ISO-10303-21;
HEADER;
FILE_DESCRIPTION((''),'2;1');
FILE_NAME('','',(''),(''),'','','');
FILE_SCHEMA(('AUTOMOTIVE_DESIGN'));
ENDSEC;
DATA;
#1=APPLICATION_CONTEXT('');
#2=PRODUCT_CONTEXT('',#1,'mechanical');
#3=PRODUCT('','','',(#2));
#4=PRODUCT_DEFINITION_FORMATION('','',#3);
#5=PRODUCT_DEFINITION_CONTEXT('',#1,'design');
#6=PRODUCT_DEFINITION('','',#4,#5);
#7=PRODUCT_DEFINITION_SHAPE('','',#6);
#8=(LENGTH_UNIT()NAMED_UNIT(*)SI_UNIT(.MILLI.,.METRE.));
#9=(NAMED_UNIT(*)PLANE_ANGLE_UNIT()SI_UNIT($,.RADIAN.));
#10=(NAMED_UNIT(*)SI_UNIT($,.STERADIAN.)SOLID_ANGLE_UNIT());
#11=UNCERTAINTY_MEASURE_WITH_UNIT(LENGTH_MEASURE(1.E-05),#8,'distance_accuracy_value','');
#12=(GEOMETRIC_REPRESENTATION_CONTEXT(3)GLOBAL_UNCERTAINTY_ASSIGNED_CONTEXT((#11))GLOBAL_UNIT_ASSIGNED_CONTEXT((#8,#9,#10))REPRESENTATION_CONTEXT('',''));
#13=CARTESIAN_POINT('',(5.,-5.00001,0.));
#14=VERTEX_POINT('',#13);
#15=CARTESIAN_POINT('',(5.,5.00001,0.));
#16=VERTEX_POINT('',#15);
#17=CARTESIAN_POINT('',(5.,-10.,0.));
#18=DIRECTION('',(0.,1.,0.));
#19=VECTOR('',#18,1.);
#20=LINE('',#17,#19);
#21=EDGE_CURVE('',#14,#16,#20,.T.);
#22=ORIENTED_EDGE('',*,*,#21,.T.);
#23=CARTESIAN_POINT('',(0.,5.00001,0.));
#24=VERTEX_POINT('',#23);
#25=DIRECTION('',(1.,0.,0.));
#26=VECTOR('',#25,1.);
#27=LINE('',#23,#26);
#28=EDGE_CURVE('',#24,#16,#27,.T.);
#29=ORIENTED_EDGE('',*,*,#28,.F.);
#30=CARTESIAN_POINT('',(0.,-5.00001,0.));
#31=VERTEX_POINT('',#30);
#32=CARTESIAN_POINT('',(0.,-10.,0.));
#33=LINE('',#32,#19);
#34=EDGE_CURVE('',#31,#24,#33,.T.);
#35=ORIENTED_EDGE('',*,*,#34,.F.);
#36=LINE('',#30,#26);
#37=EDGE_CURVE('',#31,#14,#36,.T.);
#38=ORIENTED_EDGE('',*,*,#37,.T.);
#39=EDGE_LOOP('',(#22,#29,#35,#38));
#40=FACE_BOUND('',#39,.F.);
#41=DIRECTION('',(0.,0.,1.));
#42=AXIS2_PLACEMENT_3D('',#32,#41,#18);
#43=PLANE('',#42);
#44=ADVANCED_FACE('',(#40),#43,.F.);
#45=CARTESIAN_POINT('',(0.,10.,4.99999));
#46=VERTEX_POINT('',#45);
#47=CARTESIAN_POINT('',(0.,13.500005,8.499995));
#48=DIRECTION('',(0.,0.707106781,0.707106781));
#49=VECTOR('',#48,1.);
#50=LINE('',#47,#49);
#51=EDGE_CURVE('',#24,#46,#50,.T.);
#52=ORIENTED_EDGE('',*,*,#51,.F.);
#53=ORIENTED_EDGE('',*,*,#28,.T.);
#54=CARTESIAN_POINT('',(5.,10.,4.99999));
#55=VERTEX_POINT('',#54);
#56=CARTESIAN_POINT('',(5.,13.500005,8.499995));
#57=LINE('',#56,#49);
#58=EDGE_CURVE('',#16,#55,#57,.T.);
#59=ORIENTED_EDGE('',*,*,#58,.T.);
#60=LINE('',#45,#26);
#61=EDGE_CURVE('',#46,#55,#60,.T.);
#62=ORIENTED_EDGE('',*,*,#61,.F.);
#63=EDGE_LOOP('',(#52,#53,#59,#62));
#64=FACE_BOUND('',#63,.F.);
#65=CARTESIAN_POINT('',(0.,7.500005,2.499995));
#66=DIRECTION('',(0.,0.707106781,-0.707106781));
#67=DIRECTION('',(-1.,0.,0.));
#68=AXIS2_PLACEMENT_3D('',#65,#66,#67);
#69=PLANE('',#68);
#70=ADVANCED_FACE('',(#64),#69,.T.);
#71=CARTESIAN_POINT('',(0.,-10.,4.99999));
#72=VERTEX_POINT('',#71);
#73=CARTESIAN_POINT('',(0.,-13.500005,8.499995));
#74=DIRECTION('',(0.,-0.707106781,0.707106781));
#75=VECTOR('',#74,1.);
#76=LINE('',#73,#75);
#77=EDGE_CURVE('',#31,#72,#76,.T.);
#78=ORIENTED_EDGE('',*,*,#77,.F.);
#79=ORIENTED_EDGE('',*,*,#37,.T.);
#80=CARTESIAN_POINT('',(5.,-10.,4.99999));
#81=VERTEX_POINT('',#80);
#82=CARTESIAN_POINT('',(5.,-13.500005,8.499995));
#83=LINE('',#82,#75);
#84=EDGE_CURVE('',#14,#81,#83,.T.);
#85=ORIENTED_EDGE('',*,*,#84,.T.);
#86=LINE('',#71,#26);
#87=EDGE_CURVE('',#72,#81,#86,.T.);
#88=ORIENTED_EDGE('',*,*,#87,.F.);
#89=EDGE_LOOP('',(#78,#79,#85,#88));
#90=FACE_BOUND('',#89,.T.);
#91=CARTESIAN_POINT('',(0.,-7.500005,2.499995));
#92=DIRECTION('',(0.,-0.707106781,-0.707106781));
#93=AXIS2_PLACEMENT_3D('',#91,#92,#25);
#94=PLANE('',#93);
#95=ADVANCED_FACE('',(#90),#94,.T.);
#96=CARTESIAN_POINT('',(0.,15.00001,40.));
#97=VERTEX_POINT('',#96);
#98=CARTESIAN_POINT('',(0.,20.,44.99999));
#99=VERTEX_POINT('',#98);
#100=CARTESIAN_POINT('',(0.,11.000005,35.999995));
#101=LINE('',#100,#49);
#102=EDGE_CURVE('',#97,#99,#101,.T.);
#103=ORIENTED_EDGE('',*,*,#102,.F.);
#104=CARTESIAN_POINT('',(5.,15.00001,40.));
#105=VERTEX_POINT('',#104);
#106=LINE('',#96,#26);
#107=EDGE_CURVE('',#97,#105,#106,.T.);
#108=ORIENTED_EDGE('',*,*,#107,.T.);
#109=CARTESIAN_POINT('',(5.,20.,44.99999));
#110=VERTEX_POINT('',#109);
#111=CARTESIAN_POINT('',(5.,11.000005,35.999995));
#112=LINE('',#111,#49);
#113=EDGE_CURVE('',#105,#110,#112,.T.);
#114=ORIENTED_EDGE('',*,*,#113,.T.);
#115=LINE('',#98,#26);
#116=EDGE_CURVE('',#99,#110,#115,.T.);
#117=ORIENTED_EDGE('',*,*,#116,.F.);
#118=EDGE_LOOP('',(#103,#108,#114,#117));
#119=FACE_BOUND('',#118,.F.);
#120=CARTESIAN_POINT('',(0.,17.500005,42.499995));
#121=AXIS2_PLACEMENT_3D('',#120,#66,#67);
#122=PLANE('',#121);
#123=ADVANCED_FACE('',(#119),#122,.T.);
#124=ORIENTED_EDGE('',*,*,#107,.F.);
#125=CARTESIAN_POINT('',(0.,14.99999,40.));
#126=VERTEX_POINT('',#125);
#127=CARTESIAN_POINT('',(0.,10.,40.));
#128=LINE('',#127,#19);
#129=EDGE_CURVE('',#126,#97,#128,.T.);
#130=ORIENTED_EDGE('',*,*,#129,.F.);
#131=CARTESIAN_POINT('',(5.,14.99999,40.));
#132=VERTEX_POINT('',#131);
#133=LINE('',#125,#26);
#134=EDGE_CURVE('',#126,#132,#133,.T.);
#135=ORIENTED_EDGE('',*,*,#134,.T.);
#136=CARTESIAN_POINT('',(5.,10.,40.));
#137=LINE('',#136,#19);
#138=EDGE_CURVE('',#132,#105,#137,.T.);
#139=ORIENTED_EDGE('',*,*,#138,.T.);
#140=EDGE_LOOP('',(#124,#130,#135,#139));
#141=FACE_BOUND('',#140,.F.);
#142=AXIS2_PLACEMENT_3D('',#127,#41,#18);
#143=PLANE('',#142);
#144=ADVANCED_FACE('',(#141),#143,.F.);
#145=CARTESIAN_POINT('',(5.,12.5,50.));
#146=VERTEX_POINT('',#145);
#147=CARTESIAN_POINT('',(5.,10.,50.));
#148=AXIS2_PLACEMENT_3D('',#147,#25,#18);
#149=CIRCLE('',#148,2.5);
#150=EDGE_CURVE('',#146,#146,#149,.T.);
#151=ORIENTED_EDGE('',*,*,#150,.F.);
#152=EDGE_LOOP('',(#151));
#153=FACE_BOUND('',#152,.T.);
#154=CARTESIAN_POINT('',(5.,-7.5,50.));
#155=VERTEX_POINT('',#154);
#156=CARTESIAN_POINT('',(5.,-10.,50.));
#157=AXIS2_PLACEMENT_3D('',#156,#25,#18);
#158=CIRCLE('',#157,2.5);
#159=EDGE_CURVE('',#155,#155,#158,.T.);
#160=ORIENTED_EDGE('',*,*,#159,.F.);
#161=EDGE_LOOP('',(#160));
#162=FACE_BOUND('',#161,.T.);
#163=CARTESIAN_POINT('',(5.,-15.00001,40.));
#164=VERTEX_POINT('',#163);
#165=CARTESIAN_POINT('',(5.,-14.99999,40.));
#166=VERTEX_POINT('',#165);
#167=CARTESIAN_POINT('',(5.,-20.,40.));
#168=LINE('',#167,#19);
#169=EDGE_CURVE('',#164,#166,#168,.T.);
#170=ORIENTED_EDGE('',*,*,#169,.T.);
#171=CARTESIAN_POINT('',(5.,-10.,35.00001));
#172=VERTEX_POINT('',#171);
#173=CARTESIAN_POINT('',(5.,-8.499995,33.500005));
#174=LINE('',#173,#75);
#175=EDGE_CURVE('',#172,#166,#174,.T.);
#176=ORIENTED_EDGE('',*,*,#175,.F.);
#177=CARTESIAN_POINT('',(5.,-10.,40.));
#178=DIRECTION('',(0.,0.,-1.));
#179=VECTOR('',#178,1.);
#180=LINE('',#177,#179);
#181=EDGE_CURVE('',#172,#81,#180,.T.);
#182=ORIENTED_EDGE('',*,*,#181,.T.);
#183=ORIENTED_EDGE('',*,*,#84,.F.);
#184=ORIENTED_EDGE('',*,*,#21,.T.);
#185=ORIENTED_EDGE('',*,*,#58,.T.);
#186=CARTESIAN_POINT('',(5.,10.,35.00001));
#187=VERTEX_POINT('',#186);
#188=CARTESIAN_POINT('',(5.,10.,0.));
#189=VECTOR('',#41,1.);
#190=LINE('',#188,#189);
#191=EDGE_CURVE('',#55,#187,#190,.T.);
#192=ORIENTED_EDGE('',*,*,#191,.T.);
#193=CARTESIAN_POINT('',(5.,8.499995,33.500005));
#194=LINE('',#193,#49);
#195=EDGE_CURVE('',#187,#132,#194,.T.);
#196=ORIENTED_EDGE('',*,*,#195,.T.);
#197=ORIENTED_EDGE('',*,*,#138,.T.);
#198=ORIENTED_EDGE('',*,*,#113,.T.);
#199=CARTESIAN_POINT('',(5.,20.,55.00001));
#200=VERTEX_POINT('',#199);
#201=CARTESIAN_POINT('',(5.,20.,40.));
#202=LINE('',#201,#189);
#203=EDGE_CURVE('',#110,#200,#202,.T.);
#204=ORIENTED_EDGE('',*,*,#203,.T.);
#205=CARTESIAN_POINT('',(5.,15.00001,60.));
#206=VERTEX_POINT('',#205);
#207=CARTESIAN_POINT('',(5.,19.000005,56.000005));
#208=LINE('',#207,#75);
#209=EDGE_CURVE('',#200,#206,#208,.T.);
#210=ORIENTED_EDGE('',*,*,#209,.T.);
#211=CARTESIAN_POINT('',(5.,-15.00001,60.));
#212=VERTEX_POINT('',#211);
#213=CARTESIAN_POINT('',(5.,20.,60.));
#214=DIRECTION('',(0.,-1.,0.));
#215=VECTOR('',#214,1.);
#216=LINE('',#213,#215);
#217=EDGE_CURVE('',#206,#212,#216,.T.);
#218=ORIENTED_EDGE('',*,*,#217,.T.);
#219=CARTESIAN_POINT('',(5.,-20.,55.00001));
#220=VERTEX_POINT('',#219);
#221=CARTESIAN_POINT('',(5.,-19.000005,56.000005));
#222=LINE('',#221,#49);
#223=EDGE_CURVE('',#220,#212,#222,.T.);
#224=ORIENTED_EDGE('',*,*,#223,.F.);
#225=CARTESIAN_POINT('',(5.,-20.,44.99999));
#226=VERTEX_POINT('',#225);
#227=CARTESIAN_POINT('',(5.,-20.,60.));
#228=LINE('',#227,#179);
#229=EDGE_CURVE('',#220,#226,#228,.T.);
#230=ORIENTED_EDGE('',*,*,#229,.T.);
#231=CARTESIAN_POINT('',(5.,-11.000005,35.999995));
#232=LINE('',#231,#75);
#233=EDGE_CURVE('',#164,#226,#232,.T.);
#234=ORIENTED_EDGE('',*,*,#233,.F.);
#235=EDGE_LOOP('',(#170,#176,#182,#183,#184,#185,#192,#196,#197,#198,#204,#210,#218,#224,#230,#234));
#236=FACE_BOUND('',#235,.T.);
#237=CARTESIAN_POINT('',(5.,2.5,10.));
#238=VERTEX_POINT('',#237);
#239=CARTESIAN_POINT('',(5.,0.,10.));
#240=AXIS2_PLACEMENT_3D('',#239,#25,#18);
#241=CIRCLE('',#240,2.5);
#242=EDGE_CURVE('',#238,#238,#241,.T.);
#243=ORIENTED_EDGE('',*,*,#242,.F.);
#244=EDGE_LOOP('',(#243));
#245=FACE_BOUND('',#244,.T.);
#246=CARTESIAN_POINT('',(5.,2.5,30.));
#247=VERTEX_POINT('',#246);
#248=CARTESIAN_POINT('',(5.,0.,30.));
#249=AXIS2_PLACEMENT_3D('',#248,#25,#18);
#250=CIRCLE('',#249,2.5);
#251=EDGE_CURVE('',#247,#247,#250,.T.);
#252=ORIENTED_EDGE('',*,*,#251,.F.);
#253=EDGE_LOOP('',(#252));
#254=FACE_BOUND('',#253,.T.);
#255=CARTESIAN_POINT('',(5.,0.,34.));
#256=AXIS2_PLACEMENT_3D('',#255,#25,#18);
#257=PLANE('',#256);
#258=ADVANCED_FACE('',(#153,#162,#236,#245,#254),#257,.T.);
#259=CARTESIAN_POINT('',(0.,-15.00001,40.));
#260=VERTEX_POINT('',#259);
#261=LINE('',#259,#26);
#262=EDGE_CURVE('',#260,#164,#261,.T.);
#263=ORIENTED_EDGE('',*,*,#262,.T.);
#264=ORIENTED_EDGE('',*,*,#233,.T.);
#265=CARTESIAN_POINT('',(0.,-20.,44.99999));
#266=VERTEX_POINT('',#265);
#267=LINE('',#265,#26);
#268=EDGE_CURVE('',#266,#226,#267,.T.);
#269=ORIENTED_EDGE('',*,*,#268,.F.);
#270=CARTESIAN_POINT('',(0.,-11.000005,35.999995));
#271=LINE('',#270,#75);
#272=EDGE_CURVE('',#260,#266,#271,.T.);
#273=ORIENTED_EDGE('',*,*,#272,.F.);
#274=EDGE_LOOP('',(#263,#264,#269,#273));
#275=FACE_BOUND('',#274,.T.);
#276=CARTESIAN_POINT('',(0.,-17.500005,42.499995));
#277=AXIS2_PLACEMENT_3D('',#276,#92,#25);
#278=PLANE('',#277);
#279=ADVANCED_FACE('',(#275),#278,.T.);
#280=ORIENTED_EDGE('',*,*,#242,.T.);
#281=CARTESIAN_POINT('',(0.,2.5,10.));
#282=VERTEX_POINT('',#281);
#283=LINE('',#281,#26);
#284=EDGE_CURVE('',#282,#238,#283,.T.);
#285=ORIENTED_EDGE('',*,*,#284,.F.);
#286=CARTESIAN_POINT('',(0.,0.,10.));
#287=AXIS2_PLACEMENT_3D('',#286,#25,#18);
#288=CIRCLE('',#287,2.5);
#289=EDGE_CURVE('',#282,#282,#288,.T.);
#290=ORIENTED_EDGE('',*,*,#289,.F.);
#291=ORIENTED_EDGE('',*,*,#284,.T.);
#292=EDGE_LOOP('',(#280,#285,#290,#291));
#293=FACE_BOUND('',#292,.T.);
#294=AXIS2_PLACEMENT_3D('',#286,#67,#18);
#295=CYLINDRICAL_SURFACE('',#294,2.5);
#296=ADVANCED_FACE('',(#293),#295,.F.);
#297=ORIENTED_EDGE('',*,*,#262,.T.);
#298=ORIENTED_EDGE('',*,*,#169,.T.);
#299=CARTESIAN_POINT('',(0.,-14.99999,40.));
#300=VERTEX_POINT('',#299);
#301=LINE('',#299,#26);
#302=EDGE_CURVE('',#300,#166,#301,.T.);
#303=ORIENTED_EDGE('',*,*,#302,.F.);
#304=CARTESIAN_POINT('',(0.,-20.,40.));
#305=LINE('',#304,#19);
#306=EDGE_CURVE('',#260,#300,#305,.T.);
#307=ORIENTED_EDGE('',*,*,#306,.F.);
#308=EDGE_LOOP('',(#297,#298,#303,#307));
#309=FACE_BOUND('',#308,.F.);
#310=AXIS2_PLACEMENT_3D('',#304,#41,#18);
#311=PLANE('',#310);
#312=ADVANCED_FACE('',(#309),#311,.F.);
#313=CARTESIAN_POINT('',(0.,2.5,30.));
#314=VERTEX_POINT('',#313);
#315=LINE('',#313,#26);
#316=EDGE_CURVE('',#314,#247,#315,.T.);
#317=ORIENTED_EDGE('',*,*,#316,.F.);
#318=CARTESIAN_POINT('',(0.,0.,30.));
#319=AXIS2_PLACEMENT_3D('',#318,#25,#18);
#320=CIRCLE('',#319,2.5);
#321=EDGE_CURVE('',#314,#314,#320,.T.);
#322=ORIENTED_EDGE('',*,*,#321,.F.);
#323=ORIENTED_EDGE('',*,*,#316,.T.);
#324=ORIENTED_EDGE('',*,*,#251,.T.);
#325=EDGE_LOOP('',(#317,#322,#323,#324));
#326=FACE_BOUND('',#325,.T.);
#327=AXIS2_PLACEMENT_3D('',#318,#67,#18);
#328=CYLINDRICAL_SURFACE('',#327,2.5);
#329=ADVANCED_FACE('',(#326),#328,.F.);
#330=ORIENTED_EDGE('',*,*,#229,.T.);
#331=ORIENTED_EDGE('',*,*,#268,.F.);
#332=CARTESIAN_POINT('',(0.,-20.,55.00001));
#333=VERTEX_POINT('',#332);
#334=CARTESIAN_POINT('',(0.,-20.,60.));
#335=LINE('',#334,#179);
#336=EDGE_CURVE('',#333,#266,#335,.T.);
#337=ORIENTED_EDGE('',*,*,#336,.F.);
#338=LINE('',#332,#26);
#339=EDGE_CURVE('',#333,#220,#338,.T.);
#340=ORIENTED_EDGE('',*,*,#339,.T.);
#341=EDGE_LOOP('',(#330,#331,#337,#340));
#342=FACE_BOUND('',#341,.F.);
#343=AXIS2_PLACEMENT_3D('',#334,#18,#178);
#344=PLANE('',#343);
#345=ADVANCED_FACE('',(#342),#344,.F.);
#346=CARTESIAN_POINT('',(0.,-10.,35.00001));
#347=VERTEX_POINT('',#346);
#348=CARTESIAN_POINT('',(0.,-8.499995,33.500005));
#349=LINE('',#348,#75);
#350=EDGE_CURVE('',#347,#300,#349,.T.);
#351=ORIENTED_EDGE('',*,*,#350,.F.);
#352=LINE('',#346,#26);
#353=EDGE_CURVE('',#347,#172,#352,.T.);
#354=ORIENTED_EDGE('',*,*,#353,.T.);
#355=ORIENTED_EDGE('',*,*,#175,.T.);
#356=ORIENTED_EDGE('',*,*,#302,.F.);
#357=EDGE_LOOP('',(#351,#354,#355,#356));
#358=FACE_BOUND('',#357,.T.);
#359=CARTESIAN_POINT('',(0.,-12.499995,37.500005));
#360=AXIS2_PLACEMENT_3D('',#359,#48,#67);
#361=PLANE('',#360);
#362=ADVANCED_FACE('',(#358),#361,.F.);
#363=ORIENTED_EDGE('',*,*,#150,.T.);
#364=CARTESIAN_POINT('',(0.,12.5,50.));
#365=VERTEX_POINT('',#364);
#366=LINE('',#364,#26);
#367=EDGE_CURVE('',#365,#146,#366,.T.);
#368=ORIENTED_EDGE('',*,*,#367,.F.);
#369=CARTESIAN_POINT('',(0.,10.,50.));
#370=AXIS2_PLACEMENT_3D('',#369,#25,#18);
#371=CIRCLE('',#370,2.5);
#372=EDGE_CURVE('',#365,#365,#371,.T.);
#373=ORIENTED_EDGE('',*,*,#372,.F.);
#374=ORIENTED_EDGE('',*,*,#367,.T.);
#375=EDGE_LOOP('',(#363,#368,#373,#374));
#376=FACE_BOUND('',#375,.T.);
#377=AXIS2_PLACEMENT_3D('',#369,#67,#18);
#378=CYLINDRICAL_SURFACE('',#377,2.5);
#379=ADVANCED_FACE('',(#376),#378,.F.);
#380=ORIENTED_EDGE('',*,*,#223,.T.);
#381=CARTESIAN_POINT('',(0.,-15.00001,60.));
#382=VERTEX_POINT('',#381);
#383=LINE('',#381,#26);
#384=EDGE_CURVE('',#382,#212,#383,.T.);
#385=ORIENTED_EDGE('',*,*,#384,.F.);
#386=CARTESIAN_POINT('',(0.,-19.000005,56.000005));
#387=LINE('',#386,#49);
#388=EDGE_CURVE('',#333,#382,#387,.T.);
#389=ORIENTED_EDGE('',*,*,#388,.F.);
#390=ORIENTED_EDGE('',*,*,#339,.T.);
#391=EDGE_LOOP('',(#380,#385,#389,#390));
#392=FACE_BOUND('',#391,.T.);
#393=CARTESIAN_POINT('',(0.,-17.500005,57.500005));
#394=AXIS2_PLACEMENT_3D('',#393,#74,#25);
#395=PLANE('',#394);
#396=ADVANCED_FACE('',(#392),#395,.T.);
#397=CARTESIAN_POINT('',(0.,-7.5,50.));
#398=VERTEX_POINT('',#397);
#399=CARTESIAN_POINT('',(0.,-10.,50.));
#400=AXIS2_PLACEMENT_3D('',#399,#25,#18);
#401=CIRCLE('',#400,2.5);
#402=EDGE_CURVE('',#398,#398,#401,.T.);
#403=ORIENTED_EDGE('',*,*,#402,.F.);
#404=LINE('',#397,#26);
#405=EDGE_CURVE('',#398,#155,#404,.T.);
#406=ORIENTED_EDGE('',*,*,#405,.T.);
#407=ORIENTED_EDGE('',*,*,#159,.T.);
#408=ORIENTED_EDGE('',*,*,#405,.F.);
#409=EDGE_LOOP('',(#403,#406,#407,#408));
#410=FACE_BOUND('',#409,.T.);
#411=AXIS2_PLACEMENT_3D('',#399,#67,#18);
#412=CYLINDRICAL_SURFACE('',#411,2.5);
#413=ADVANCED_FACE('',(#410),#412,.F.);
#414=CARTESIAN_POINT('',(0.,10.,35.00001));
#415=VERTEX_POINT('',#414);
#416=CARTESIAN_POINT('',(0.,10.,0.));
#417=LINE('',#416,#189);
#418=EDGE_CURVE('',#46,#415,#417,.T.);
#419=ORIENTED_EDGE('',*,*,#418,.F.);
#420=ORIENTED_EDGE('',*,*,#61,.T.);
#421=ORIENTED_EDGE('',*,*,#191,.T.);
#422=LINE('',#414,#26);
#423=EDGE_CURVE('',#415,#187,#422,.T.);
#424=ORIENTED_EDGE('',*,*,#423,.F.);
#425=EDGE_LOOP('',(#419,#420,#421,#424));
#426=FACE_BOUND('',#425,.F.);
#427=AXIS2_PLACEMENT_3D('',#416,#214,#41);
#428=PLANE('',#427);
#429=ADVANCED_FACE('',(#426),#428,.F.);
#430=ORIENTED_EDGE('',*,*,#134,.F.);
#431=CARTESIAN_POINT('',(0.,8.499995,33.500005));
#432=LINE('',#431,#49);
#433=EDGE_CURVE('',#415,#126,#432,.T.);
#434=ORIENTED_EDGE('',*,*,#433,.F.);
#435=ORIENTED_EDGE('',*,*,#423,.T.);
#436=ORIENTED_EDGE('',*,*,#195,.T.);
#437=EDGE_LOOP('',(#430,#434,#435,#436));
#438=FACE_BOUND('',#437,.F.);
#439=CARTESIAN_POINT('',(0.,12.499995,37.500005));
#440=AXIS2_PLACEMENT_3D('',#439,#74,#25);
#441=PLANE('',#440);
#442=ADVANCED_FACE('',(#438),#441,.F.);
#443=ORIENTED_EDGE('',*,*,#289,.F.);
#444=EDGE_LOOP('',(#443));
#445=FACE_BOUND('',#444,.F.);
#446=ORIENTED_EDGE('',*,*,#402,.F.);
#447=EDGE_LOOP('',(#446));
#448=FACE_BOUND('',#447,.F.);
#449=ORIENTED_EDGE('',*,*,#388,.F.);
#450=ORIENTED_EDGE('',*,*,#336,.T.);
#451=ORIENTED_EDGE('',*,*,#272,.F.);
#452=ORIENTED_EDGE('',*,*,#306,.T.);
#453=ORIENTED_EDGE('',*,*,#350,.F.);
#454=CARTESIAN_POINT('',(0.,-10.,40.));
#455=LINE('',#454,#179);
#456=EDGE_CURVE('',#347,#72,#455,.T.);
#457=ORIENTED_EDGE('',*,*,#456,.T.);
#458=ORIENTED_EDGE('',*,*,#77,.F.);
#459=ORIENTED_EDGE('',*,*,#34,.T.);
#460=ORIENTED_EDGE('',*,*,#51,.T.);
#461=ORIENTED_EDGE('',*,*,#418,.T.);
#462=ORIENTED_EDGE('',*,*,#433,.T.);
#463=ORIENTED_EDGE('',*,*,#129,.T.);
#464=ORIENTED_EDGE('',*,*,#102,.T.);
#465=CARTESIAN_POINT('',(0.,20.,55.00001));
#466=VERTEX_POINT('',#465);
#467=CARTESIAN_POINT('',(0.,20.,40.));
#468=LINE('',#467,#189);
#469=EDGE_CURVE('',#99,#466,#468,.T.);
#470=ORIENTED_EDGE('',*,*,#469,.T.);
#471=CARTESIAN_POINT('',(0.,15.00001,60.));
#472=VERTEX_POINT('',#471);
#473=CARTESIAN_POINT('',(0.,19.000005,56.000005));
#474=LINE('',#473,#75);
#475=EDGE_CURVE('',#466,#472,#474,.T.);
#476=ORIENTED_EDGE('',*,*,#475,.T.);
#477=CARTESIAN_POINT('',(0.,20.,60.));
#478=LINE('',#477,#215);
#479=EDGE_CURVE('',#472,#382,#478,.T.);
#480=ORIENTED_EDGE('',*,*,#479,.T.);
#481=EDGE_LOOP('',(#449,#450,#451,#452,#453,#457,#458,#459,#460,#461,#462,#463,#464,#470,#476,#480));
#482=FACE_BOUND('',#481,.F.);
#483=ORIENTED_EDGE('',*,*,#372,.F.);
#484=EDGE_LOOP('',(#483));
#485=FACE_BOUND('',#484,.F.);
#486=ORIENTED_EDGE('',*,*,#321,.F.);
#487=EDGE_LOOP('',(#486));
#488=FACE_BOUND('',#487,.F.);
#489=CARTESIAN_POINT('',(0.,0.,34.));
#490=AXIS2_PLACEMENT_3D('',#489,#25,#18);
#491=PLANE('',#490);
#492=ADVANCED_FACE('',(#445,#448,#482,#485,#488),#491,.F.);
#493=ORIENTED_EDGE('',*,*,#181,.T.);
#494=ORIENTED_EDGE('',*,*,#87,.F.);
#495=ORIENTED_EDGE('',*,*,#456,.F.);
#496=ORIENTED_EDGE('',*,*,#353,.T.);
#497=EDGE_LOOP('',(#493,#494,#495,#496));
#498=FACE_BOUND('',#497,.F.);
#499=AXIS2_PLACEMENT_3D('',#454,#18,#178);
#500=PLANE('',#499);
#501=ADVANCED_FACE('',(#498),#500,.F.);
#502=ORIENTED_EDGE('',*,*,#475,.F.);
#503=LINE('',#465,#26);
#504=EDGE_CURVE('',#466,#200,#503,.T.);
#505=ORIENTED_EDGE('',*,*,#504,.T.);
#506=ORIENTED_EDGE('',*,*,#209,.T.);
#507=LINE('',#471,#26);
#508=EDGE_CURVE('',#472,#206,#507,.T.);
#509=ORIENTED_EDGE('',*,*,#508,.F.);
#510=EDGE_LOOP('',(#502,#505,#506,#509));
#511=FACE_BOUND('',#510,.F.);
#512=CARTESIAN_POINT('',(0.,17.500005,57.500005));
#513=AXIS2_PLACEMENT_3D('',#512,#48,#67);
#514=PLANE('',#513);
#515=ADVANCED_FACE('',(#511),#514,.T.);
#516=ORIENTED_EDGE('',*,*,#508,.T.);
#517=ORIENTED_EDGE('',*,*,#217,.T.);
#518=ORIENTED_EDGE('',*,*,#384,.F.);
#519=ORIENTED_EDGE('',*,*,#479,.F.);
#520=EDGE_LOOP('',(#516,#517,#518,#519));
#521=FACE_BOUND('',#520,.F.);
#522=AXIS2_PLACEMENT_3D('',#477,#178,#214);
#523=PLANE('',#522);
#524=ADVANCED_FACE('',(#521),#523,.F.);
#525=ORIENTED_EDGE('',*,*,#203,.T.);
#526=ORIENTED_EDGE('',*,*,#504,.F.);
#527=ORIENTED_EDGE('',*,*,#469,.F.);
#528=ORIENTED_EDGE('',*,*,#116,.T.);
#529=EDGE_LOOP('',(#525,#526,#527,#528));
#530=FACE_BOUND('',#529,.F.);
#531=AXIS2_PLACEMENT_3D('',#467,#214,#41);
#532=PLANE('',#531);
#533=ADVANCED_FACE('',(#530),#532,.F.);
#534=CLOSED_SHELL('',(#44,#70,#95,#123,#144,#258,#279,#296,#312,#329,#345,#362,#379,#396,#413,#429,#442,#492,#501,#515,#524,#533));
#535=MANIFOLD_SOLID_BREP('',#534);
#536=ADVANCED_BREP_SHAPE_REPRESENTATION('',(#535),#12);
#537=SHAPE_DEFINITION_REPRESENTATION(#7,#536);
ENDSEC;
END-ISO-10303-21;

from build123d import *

# Parameters (mm, degrees)
F0_R     = 2.5
F1_DEPTH = 5
F2_SIZE  = 4.99999


# Not quite as in the source:
# - a fillet or chamfer is up to 0.001 mm smaller than in the source, because OpenCascade refuses the exact size


with BuildPart() as f1:
    # F0 (on Right) → F1 (new body)
    with BuildSketch(Plane.YZ):
        Polygon((-10, 0), (10, 0), (10, 40), (20, 40), (20, 60), (-20, 60), (-20, 40), (-10, 40), align=None)
        with Locations((0, 10)):
            Circle(F0_R, mode=Mode.SUBTRACT)
        with Locations((-10, 50)):
            Circle(F0_R, mode=Mode.SUBTRACT)
        with Locations((0, 30)):
            Circle(F0_R, mode=Mode.SUBTRACT)
        with Locations((10, 50)):
            Circle(F0_R, mode=Mode.SUBTRACT)
    extrude(amount=F1_DEPTH)

    # F2 (size 5 in the source; OpenCascade refuses exactly that, so slightly less here)
    f2_edges = [f1.edges().sort_by_distance(p)[0] for p in [
        (2.5, 10, 40),
        (2.5, 20, 40),
        (2.5, 20, 60),
        (2.5, 10, 0),
        (2.5, -10, 0),
        (2.5, -10, 40),
        (2.5, -20, 40),
        (2.5, -20, 60),
    ]]
    chamfer(f2_edges, length=F2_SIZE)


solid = f1.part
